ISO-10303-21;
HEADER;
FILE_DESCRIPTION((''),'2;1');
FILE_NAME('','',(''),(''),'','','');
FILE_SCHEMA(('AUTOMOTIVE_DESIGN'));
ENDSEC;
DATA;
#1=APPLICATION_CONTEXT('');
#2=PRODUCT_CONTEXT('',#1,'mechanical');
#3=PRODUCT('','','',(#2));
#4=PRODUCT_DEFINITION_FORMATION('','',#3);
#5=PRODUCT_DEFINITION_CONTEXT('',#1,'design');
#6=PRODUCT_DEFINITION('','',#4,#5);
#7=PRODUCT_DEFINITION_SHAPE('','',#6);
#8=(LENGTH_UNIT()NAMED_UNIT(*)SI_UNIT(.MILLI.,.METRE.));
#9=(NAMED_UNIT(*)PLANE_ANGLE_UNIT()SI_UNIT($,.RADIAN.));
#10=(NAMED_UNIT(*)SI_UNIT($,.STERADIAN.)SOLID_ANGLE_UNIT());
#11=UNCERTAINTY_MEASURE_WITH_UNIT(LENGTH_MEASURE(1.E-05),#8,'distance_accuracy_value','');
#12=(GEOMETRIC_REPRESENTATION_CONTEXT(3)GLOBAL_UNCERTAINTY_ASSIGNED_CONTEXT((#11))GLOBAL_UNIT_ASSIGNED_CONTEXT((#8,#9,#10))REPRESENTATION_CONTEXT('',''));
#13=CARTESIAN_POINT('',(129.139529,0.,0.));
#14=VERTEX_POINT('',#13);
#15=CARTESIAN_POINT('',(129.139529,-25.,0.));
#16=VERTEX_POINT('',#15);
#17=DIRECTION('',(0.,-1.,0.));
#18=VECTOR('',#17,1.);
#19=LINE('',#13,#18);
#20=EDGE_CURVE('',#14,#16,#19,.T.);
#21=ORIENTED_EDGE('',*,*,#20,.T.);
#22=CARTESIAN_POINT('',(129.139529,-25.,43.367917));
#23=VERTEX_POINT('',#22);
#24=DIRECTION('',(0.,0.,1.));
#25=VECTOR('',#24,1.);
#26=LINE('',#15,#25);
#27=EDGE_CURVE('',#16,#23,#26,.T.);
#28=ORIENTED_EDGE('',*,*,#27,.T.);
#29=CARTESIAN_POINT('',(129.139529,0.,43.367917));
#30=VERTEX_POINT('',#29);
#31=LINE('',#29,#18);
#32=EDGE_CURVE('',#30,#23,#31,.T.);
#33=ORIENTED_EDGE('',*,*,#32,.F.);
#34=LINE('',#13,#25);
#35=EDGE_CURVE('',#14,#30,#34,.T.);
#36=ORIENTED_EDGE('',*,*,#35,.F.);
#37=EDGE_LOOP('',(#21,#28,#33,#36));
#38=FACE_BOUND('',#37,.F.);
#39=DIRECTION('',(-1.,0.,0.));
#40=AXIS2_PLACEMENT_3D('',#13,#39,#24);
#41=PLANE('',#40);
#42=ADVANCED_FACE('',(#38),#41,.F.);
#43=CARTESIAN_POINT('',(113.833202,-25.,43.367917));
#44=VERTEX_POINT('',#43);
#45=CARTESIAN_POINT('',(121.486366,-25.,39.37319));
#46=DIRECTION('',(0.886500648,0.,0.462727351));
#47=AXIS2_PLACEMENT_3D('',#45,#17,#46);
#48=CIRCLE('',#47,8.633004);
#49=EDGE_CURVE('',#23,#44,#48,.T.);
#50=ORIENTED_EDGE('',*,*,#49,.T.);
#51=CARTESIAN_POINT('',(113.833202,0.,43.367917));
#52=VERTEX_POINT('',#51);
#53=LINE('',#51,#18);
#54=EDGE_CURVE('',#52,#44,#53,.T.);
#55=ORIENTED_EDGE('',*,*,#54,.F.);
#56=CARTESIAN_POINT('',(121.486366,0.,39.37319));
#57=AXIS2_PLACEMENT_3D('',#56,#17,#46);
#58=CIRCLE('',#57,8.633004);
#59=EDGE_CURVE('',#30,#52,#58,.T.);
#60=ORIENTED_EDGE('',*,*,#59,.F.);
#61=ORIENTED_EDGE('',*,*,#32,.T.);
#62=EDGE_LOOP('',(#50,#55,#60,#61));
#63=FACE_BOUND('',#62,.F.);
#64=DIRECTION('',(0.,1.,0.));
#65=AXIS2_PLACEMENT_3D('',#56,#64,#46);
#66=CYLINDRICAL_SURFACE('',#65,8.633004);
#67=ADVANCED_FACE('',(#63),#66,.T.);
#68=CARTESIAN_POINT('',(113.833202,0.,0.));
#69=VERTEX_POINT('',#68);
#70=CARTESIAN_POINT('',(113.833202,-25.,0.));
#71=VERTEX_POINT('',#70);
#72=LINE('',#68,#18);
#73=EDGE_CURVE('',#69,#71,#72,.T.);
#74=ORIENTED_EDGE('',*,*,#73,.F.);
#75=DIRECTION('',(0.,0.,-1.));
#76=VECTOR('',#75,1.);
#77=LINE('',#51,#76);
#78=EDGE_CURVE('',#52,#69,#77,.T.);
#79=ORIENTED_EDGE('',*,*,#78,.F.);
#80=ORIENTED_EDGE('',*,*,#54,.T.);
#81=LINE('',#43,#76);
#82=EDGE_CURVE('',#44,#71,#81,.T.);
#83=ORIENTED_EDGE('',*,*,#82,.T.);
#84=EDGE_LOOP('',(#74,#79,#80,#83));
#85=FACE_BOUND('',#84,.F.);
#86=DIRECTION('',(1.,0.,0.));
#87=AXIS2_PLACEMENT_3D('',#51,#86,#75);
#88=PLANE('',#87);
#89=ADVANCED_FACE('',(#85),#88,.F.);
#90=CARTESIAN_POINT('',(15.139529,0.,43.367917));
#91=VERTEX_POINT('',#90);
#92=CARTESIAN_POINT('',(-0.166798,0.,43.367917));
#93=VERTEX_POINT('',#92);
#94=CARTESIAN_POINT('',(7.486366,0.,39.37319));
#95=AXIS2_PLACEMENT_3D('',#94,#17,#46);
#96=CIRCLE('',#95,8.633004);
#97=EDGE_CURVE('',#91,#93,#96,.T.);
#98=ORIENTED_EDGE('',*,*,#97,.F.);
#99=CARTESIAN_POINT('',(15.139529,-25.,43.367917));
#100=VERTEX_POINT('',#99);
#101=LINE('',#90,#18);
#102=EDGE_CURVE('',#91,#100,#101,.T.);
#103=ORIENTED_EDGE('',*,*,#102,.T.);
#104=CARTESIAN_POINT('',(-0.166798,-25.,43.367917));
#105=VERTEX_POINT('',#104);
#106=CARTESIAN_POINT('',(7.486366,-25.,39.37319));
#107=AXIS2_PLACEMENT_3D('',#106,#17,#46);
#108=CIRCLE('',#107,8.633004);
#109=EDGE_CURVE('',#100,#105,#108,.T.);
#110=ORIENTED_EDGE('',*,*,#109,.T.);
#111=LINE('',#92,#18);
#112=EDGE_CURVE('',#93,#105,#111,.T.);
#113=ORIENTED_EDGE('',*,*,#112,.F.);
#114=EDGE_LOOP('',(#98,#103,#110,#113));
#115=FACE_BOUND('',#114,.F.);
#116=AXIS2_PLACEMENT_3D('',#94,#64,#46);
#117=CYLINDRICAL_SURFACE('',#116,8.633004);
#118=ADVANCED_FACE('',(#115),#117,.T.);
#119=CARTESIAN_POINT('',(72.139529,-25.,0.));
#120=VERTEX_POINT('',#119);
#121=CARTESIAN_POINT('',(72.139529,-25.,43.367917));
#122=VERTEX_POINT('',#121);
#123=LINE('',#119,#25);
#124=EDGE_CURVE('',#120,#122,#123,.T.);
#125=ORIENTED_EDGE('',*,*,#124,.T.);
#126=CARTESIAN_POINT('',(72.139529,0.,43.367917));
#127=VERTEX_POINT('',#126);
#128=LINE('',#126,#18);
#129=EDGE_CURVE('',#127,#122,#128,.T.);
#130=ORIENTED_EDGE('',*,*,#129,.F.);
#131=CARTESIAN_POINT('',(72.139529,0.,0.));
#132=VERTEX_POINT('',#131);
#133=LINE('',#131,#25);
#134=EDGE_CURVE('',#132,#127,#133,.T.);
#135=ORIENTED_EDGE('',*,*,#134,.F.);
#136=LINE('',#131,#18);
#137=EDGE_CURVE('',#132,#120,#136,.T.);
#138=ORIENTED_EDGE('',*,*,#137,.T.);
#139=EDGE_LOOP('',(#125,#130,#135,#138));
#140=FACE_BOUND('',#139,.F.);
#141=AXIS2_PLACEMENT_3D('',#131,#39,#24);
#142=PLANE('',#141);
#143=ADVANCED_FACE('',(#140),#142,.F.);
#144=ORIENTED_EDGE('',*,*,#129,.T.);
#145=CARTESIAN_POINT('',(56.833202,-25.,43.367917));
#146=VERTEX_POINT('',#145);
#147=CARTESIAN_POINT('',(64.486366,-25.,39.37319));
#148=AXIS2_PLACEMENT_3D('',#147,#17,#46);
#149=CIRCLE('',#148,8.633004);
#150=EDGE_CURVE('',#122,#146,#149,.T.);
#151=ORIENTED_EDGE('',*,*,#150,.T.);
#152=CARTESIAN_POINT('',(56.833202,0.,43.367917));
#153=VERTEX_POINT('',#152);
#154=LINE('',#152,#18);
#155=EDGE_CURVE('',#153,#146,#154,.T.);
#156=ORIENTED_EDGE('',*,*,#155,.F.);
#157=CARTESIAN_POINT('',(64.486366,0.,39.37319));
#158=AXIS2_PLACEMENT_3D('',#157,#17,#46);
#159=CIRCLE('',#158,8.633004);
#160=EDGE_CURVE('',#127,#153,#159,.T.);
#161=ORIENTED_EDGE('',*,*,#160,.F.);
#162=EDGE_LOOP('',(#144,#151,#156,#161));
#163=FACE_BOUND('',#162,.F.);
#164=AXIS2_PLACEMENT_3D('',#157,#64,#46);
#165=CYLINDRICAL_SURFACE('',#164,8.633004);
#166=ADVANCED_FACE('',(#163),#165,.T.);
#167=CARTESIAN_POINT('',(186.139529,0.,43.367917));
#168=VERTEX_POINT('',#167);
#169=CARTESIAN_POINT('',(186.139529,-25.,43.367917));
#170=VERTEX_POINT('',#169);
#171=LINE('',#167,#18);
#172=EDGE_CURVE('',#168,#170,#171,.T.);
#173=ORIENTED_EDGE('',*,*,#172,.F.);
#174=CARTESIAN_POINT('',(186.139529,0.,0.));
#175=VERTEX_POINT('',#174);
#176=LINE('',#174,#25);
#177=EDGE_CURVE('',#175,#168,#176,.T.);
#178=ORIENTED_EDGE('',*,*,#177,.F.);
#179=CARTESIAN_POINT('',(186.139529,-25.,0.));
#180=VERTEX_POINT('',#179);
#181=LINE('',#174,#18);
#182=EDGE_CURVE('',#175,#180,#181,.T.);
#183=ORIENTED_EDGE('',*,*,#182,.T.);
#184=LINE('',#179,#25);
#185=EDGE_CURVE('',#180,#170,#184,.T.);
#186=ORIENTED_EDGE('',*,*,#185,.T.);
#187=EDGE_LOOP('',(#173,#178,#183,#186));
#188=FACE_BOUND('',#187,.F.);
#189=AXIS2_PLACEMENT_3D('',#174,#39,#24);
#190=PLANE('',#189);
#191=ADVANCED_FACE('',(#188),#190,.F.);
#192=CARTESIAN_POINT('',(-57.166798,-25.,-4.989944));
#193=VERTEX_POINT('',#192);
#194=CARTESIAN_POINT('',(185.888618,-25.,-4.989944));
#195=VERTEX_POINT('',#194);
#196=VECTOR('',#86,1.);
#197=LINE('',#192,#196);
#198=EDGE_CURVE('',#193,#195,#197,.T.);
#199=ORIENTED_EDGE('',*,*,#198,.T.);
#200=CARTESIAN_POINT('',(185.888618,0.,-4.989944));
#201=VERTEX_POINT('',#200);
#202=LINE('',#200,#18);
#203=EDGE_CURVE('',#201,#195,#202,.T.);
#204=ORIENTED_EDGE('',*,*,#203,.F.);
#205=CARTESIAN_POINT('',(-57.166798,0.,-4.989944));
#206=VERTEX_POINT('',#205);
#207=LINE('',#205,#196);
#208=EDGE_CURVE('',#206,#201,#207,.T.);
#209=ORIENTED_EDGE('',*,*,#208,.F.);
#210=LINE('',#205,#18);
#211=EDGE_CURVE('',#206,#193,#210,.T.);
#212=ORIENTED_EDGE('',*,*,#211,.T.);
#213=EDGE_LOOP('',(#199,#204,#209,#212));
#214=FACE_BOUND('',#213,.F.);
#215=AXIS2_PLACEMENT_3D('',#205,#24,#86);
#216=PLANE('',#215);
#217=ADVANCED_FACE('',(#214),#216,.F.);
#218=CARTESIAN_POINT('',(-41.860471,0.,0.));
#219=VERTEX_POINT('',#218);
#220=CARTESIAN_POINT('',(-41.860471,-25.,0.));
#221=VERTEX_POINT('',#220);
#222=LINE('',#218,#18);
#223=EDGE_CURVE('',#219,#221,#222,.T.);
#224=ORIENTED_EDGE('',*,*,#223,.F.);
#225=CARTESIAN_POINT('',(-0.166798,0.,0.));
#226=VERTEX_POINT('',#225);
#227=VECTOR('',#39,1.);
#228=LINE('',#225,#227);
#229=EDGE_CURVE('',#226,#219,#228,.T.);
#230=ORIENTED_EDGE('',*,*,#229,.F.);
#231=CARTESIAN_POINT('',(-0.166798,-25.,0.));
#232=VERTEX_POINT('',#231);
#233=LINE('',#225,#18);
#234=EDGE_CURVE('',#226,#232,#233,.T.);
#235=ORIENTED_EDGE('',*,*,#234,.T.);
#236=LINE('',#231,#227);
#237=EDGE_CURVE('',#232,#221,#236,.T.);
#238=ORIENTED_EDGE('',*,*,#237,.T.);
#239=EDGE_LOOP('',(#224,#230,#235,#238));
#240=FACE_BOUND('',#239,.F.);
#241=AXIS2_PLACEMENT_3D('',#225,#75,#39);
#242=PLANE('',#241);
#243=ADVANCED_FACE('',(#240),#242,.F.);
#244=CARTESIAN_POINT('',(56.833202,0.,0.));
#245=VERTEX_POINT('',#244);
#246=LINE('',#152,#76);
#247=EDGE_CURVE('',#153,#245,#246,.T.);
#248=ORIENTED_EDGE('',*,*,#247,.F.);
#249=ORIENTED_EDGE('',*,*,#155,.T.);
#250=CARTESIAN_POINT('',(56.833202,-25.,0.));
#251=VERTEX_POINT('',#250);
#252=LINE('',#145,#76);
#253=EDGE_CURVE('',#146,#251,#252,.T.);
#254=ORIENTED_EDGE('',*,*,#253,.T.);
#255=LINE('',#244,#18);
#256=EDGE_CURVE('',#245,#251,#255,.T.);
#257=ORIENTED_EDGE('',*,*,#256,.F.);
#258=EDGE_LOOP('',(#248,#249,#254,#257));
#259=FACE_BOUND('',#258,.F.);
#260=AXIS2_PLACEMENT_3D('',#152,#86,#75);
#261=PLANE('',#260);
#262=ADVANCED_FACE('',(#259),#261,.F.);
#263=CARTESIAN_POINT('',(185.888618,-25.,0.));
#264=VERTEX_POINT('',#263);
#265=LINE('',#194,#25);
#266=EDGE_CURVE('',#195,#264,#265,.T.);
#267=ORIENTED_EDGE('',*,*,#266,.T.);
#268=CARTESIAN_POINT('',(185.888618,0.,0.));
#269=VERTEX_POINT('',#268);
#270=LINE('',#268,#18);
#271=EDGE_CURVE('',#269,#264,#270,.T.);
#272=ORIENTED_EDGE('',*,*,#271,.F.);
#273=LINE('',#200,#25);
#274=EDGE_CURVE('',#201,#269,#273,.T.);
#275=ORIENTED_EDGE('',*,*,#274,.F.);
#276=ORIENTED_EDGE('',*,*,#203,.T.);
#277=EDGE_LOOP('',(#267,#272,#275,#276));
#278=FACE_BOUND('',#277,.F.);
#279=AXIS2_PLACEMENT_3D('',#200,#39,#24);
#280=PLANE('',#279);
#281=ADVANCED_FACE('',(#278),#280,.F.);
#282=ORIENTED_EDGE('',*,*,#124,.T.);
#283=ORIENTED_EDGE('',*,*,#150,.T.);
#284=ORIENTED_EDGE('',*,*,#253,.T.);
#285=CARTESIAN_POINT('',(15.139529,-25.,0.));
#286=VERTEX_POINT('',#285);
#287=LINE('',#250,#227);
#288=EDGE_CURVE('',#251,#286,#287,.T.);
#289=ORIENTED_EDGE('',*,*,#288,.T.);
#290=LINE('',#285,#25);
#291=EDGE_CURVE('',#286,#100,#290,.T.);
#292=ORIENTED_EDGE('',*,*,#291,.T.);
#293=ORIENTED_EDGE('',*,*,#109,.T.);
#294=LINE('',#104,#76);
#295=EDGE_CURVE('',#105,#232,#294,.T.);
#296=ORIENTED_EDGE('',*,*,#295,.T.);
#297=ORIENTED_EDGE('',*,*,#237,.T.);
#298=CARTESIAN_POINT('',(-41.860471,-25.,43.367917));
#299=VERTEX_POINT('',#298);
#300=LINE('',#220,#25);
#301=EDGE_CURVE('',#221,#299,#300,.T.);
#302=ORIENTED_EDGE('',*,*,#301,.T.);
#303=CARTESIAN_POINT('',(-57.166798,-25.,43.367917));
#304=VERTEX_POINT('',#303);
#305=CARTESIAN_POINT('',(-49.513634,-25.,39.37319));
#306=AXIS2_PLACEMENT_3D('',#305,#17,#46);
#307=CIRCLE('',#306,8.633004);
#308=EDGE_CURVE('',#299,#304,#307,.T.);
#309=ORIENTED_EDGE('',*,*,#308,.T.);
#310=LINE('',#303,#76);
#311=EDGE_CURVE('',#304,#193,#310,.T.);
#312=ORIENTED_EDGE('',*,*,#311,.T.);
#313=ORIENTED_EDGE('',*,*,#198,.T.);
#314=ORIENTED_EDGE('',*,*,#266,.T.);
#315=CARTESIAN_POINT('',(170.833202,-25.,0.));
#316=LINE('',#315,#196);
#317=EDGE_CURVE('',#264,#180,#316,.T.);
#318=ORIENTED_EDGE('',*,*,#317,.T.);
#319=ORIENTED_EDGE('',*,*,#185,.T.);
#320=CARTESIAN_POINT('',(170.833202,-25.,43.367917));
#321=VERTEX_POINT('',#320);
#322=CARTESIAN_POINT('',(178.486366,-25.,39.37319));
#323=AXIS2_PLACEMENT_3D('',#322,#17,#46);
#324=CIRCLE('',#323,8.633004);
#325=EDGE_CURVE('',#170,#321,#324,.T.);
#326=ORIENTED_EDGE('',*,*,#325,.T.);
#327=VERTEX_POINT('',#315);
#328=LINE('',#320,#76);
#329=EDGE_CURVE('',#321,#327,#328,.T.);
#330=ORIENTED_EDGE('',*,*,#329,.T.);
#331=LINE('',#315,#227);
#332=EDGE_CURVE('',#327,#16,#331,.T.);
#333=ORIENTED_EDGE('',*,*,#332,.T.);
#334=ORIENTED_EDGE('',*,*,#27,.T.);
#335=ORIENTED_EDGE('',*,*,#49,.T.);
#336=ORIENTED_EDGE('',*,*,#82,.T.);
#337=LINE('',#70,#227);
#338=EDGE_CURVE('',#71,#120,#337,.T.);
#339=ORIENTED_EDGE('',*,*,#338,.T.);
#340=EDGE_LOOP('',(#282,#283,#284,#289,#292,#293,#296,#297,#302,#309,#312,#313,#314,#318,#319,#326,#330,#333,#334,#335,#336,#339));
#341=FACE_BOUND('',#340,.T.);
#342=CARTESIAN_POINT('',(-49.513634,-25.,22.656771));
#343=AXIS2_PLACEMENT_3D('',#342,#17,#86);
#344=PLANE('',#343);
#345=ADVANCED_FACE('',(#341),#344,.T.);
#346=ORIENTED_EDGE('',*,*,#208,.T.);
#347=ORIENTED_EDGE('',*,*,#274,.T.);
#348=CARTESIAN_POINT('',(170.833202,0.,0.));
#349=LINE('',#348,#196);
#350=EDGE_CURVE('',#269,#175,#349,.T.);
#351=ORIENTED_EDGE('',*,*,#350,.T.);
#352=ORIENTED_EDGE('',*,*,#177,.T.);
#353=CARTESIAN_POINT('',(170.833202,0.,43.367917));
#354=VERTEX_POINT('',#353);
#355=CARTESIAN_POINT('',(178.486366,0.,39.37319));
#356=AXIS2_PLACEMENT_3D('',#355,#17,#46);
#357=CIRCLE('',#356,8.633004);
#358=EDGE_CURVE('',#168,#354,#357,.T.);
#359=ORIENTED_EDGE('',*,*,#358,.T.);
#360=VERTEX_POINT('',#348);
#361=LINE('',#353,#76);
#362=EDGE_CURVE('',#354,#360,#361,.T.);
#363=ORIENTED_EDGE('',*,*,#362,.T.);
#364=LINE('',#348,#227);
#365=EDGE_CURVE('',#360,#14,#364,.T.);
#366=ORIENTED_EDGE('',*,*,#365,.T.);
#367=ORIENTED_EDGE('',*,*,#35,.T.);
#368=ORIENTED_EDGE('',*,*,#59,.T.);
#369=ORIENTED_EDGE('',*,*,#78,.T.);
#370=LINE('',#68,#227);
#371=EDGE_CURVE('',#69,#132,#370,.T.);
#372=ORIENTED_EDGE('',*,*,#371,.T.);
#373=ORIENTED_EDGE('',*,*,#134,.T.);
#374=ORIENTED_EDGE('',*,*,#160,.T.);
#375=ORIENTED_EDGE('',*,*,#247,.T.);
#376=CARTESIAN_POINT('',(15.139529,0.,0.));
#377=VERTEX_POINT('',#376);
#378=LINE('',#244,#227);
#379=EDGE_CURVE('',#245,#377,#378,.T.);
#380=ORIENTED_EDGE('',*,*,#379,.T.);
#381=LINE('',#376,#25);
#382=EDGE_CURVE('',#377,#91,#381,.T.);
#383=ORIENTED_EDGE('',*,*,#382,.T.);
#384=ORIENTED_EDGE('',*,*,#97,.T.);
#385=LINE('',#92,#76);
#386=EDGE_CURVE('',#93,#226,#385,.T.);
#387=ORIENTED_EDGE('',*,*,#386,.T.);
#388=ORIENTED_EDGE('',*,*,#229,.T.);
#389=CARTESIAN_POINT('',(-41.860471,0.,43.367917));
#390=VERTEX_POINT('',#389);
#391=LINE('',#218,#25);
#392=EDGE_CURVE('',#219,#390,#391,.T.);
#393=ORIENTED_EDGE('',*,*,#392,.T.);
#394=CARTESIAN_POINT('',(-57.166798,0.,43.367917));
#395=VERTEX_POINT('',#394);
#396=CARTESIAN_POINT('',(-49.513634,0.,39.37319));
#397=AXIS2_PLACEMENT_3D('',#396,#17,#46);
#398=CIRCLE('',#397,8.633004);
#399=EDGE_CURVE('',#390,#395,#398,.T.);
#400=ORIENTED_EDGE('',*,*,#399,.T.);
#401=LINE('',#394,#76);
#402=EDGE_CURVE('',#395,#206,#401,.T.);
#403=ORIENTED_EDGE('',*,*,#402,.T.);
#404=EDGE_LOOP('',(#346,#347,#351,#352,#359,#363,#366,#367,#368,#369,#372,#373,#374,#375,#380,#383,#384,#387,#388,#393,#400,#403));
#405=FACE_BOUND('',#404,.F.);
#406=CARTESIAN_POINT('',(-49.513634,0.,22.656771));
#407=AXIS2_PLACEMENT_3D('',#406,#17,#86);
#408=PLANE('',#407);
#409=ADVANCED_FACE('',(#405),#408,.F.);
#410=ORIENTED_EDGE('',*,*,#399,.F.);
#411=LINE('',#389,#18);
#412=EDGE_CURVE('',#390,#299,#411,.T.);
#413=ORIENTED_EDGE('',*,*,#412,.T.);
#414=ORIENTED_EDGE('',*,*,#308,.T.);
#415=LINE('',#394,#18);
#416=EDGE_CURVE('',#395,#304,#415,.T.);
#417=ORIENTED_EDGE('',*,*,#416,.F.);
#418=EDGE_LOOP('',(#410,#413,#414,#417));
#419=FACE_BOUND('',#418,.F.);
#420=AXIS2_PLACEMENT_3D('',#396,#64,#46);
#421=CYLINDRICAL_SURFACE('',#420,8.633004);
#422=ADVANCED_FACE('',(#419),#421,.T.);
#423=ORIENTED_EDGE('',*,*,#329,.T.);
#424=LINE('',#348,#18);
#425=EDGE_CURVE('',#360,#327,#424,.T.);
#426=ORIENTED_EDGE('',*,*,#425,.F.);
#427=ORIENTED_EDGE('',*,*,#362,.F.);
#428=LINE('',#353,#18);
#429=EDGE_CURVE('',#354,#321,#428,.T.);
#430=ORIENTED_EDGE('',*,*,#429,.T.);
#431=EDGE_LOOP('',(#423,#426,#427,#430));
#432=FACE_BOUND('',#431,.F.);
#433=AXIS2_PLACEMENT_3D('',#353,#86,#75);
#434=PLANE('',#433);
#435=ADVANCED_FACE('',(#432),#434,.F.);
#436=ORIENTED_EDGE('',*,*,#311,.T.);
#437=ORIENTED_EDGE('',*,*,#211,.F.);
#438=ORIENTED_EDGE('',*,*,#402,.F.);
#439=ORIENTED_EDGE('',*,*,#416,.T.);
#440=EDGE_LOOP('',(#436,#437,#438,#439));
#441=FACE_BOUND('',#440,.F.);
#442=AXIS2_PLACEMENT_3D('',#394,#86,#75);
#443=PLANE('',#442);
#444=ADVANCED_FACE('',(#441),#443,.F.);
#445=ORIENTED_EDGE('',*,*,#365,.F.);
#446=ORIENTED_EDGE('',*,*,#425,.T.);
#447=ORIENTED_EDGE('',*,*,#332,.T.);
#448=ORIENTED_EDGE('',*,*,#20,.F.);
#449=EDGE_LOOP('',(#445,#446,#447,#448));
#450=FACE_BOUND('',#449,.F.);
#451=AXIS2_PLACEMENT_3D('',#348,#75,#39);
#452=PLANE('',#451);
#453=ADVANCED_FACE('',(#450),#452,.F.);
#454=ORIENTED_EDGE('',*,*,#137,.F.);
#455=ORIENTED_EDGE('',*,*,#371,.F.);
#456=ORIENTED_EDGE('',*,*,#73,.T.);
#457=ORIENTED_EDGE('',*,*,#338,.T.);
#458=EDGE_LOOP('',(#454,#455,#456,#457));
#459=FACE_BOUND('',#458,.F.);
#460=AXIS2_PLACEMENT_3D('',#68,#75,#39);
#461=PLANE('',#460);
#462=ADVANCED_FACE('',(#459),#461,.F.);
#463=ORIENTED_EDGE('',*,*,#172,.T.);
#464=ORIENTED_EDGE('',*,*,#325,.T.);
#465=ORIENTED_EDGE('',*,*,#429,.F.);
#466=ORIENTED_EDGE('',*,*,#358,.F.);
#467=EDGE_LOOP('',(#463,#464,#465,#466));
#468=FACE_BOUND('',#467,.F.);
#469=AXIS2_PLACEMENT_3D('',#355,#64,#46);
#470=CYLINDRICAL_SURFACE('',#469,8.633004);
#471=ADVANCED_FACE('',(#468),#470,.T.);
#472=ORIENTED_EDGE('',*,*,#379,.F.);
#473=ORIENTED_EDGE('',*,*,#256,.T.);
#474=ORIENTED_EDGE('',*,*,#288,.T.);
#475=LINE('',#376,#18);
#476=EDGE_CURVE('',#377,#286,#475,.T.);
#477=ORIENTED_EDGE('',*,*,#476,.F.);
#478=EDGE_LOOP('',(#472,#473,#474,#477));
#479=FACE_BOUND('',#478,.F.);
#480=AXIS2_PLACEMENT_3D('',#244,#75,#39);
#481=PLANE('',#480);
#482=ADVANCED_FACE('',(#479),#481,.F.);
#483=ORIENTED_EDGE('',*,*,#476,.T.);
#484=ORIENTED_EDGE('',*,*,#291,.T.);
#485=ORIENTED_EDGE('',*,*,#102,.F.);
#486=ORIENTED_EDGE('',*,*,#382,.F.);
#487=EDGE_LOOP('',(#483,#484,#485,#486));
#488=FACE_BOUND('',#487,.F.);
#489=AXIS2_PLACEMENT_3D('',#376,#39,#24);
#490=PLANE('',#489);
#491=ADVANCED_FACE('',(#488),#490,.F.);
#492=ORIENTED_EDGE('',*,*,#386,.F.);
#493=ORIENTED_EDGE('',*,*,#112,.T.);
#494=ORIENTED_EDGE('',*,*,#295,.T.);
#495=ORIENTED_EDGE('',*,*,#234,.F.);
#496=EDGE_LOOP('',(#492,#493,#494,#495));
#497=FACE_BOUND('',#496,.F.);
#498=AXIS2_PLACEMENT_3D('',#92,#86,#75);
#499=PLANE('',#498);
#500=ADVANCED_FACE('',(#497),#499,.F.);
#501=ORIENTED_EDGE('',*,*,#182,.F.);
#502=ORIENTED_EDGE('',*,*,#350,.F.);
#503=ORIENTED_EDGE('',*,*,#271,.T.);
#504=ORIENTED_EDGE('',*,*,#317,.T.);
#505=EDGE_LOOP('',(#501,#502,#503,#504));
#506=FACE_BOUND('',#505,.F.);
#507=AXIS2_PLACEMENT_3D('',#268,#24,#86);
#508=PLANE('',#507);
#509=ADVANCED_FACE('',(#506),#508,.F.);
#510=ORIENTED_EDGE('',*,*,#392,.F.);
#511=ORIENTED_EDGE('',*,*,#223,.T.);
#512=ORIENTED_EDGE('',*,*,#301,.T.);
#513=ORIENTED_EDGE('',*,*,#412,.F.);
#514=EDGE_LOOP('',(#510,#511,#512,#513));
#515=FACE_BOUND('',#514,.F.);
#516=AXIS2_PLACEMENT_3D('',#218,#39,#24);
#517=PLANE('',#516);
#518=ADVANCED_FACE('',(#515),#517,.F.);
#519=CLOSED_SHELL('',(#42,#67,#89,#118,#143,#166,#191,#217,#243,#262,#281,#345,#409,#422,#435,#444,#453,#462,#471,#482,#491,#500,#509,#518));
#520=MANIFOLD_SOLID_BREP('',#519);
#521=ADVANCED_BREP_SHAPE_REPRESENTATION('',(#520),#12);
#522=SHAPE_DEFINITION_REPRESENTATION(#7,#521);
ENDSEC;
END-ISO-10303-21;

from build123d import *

# Parameters (mm, degrees)
F1_DEPTH = 25


# Not quite as in the source:
# - a feature names something its author has since deleted; it is built from what else it names


with BuildPart() as f1:
    # F0 (on Front) → F1 (new body)
    with BuildSketch(Plane.XZ):
        with BuildLine():
            Line((-57.1667980403, 43.3679167181), (-57.1667980403, 0))
            Line((-57.1667980403, 0), (-41.8604705483, 0))
            Line((-41.8604705483, 0), (-41.8604705483, 43.3679167181))
            ThreePointArc((-41.8604705483, 43.3679167181), (-49.5136342943, 48.0061937124), (-57.1667980403, 43.3679167181))
        make_face()
        with BuildLine():
            Line((-0.1667980403, 43.3679167181), (-0.1667980403, 0))
            Line((-0.1667980403, 0), (15.1395294517, 0))
            Line((15.1395294517, 0), (15.1395294517, 43.3679167181))
            ThreePointArc((15.1395294517, 43.3679167181), (7.4863657057, 48.0061937124), (-0.1667980403, 43.3679167181))
        make_face()
        with BuildLine():
            Line((56.8332019597, 43.3679167181), (56.8332019597, 0))
            Line((56.8332019597, 0), (72.1395294517, 0))
            Line((72.1395294517, 0), (72.1395294517, 43.3679167181))
            ThreePointArc((72.1395294517, 43.3679167181), (64.4863657057, 48.0061937124), (56.8332019597, 43.3679167181))
        make_face()
        with BuildLine():
            Line((113.8332019597, 0), (129.1395294517, 0))
            Line((129.1395294517, 0), (129.1395294517, 43.3679167181))
            ThreePointArc((129.1395294517, 43.3679167181), (121.4863657057, 48.0061937124), (113.8332019597, 43.3679167181))
            Line((113.8332019597, 43.3679167181), (113.8332019597, 0))
        make_face()
        with BuildLine():
            Line((170.8332019597, 0), (185.8886182308, 0))
            Line((185.8886182308, 0), (186.1395294517, 0))
            Line((186.1395294517, 0), (186.1395294517, 43.3679167181))
            ThreePointArc((186.1395294517, 43.3679167181), (178.4863657057, 48.0061937124), (170.8332019597, 43.3679167181))
            Line((170.8332019597, 43.3679167181), (170.8332019597, 0))
        make_face()
        Polygon((-41.8604705483, 0), (-57.1667980403, 0), (-57.1667980403, -4.9899439327), (185.8886182308, -4.9899439327), (185.8886182308, 0), (170.8332019597, 0), (162.9481277168, 0), (140.3730809391, 0), (129.1395294517, 0), (113.8332019597, 0), (105.9481277168, 0), (83.3730809391, 0), (72.1395294517, 0), (56.8332019597, 0), (48.9481277168, 0), (15.1395294517, 0), (-0.1667980403, 0), (-8.0518722832, 0), align=None)
    extrude(amount=F1_DEPTH)


solid = f1.part
